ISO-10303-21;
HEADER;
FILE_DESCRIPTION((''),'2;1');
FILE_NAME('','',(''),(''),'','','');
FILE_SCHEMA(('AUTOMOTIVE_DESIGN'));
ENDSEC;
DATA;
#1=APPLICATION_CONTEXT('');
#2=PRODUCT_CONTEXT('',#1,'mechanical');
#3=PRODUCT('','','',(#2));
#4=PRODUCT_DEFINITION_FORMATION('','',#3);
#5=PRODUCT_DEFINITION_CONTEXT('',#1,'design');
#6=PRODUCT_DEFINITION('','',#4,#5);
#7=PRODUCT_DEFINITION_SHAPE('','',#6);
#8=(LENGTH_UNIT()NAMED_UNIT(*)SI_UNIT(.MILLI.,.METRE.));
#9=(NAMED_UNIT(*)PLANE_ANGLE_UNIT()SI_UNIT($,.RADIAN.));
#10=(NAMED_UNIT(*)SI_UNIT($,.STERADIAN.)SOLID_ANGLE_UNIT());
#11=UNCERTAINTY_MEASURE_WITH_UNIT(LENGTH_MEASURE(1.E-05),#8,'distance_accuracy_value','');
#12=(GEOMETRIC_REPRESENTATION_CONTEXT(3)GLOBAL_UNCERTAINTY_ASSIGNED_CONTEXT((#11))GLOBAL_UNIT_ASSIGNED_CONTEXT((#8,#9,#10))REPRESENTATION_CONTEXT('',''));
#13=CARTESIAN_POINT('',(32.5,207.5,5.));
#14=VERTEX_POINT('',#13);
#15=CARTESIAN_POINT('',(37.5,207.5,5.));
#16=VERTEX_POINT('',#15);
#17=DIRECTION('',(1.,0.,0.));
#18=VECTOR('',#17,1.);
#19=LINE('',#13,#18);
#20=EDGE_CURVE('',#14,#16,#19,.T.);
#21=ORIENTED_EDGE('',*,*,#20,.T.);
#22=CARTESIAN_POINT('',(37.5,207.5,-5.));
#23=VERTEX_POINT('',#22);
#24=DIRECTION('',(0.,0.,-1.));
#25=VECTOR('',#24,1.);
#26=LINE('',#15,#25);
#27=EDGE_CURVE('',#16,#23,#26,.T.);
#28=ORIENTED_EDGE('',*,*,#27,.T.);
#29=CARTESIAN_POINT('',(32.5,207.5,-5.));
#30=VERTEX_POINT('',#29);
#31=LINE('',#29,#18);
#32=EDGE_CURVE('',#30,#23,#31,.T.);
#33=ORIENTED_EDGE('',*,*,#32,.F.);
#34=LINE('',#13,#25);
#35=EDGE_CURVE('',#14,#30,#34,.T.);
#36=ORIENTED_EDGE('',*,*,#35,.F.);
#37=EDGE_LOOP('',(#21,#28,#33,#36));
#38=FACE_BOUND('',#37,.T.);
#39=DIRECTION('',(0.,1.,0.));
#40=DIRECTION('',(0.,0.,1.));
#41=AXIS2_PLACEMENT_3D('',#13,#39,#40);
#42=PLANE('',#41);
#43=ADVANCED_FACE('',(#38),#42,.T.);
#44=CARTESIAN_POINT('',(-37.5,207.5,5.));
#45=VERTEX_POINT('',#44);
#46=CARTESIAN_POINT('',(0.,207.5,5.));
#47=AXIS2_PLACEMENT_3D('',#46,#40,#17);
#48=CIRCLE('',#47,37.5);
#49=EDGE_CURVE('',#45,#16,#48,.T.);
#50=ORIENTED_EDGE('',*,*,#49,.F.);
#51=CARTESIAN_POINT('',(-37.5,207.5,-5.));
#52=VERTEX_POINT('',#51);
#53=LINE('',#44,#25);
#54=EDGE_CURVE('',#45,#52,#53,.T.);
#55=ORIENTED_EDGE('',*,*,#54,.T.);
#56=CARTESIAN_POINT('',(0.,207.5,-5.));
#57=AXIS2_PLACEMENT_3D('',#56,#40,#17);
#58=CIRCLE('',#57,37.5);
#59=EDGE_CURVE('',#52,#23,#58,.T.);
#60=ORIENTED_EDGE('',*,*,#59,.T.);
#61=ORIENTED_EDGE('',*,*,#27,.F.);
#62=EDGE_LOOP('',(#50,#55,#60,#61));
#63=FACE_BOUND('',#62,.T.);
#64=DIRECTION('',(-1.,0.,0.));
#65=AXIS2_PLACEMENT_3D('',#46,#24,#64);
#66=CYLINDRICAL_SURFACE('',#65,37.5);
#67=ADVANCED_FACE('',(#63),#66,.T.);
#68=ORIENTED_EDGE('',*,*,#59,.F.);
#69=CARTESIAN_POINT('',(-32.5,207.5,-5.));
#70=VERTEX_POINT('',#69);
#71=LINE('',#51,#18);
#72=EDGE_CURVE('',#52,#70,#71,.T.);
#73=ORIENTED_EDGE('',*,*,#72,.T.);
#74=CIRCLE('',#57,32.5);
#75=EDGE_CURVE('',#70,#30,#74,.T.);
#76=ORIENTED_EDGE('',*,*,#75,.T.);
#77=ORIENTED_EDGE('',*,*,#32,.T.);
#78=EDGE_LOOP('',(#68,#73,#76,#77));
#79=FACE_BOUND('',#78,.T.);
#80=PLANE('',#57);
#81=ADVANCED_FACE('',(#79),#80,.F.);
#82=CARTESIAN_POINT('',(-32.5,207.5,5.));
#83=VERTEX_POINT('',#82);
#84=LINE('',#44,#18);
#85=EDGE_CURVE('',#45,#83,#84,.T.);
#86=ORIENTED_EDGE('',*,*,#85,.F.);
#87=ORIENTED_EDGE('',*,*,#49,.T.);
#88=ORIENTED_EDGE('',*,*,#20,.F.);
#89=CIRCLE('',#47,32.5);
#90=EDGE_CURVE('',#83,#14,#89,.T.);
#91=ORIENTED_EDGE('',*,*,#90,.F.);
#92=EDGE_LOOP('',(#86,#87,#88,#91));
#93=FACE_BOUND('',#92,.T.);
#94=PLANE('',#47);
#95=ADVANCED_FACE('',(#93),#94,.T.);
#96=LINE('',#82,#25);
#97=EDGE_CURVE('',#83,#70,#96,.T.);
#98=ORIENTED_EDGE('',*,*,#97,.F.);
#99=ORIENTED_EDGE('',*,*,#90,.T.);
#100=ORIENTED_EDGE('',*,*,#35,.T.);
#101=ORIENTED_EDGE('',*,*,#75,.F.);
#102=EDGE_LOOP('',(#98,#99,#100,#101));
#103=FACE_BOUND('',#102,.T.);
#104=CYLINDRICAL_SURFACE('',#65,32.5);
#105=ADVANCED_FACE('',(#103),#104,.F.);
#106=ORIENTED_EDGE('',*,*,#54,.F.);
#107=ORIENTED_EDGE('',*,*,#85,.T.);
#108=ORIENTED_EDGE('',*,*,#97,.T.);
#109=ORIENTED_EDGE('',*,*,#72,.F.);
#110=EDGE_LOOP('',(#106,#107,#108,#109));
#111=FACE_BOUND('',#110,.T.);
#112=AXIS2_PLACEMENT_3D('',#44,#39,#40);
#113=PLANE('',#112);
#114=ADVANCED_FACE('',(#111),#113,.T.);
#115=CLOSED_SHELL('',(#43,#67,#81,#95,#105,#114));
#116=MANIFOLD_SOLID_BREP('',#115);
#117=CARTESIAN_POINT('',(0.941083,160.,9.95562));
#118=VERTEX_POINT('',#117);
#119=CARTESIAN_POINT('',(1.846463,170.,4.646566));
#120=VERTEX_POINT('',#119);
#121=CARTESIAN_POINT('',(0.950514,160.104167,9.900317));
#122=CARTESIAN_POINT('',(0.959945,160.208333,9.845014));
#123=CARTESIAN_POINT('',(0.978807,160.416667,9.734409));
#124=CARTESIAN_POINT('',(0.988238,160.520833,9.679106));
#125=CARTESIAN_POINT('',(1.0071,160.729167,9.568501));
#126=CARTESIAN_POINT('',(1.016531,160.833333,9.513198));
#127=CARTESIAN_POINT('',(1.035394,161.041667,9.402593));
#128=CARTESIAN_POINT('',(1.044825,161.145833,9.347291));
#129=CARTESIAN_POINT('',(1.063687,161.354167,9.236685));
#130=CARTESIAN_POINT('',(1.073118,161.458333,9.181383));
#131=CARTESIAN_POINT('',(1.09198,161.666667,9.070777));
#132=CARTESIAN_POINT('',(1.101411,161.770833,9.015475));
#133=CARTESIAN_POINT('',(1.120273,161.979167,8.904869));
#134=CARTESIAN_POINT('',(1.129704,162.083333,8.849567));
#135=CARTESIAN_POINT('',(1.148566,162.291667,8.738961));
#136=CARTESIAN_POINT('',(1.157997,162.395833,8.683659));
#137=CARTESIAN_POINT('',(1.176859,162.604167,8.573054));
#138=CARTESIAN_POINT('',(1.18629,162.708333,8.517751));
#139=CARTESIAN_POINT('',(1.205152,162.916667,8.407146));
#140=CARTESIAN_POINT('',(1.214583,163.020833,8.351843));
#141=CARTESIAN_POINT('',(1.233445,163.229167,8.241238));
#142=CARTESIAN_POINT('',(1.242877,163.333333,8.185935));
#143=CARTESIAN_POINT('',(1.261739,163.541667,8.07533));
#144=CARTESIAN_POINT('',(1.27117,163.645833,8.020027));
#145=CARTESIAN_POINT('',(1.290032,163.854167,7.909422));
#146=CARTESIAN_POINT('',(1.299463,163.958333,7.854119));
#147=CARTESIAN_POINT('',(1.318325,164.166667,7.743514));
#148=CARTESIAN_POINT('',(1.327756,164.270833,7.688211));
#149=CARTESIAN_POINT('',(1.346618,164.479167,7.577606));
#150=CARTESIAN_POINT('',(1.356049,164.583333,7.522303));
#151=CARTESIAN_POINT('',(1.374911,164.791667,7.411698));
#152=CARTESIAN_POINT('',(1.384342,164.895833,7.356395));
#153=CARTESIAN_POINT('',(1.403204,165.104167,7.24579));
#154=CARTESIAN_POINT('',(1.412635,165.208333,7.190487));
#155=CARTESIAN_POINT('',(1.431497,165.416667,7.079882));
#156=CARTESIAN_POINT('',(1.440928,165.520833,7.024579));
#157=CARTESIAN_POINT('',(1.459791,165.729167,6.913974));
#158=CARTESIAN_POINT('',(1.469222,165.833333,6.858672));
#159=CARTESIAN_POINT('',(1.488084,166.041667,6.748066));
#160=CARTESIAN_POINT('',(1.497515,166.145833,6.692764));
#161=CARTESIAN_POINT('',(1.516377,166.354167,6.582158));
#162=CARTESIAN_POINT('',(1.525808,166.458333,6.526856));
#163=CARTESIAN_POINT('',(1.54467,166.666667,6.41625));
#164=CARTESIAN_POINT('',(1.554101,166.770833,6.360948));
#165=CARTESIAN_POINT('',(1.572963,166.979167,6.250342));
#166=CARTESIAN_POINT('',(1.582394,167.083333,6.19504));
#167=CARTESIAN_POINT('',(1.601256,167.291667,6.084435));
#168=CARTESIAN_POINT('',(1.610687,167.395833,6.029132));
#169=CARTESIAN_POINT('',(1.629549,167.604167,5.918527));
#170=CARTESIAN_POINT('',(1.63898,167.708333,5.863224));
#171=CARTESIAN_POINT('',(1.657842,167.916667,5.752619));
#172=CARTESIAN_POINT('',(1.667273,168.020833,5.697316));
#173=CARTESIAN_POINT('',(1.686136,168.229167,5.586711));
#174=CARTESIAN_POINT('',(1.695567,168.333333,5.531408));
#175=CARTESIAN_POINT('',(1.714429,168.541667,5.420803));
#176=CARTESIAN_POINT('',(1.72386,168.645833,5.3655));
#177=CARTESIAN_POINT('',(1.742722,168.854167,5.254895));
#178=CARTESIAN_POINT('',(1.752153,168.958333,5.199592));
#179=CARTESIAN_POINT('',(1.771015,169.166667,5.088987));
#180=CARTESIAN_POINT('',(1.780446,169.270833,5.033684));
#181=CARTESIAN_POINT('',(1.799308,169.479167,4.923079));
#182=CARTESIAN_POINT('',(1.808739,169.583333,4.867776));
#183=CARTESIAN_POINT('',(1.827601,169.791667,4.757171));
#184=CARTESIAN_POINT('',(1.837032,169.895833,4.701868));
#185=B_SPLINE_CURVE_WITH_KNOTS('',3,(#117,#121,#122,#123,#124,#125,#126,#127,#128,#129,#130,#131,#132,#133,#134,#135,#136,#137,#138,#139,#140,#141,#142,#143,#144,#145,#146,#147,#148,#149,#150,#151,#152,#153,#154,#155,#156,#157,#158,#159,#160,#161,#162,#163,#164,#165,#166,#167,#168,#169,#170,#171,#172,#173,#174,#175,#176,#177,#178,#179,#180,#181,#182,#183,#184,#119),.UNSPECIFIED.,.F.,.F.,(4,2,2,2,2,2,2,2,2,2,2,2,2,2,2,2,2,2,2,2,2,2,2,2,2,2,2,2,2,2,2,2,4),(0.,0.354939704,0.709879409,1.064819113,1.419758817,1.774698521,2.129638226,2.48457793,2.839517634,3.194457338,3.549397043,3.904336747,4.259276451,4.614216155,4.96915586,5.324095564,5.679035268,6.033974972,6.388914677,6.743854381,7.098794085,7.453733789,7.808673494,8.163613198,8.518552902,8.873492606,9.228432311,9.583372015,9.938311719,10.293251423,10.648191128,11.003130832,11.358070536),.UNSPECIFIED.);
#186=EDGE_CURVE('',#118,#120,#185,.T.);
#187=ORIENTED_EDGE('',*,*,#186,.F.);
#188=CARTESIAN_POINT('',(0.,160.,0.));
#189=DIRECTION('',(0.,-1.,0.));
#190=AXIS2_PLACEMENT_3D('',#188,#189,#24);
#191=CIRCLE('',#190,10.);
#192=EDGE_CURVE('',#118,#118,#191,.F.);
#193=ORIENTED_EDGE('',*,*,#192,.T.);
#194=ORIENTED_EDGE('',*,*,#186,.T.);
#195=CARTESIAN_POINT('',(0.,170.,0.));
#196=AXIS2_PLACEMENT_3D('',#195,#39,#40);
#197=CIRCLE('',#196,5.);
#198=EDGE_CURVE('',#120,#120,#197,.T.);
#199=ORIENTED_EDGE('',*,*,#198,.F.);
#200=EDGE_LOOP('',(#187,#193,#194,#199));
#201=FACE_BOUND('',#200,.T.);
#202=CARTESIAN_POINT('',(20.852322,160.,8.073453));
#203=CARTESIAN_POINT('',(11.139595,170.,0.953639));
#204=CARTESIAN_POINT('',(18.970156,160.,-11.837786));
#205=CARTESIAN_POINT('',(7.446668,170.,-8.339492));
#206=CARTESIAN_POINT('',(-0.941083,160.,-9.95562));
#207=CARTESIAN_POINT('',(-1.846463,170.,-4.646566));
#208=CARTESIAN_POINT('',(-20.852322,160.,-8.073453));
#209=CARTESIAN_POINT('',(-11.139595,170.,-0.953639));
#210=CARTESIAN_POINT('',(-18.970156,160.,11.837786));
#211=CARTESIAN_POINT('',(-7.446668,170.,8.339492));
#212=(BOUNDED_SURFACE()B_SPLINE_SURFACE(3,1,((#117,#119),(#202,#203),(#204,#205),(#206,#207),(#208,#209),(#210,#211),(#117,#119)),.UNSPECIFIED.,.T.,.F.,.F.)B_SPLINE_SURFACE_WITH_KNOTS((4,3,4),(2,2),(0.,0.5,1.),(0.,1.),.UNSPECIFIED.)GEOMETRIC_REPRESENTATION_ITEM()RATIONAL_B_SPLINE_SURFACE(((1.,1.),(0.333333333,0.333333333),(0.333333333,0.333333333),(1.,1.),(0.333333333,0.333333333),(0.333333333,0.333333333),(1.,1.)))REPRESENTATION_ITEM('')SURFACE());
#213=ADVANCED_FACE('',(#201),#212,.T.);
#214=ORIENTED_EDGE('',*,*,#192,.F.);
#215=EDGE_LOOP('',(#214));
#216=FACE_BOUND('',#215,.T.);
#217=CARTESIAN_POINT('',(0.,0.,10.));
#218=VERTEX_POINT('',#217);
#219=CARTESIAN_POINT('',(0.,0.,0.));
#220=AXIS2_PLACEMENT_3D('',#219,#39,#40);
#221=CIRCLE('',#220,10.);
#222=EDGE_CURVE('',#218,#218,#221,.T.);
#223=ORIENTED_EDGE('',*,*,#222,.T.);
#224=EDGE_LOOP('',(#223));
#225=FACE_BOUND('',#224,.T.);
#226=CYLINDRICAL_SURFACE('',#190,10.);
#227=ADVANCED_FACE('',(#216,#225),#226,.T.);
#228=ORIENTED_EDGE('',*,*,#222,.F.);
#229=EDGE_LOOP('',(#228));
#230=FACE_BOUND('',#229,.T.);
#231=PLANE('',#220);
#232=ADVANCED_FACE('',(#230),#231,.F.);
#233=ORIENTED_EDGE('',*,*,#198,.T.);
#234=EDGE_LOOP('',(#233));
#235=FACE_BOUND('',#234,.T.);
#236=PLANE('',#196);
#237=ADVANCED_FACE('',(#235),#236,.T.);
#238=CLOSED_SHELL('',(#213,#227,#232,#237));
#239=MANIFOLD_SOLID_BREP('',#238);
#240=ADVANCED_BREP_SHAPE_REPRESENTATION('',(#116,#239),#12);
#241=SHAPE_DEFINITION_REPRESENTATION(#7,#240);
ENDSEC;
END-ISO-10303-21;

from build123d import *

# Parameters (mm, degrees)
SKETCH_1_R           = 10
EXTRUDE_1_DEPTH      = 160
EXTRUDE_2_DEPTH      = 5
EXTRUDE_2_DEPTH_BACK = 5


with BuildPart() as part:
    # Эскиз1 → Бобышка-Вытянуть1 (new body)
    with BuildSketch(Plane(origin=(0, 0, 0), x_dir=(1, 0, 0), z_dir=(0, 1, 0))):
        with Locations(Location((0, 0, 0), (0, 0, 270))):
            Circle(SKETCH_1_R)
    extrude(amount=EXTRUDE_1_DEPTH)

    # По сечениям1: read off the stored shape, not the designer's step
    # По сечениям1: loft between two sections, ruled curve by curve
    loft_1_from = [
        Edge.make_bspline([(0.941083133, 160, 9.955619646), (20.852322425, 160, 8.07345338), (18.970156159, 160, -11.837785912), (-0.941083133, 160, -9.955619646), (-20.852322425, 160, -8.07345338), (-18.970156159, 160, 11.837785912), (0.941083133, 160, 9.955619646)], [0, 0, 0, 0, 0.5, 0.5, 0.5, 1, 1, 1, 1], 3, [1, 0.333333333, 0.333333333, 1, 0.333333333, 0.333333333, 1]),
    ]
    loft_1_to = [
        Edge.make_bspline([(1.846463267, 170, 4.646565765), (11.139594796, 170, 0.953639232), (7.446668263, 170, -8.339492298), (-1.846463267, 170, -4.646565765), (-11.139594796, 170, -0.953639232), (-7.446668263, 170, 8.339492298), (1.846463267, 170, 4.646565765)], [0, 0, 0, 0, 0.5, 0.5, 0.5, 1, 1, 1, 1], 3, [1, 0.333333333, 0.333333333, 1, 0.333333333, 0.333333333, 1]),
    ]
    loft_1 = Solid(Shell([*[Face.make_surface_from_curves(loft_1_from[k], loft_1_to[k]) for k in range(1)], Face(Wire(loft_1_from)), Face(Wire(loft_1_to))]))
    add(loft_1)


with BuildPart() as body_2:
    # Эскиз8 → Бобышка-Вытянуть2 (new, two sides: drawn at the far end of the back side and taken through both)
    with BuildSketch(Plane.XY.offset(-EXTRUDE_2_DEPTH_BACK)):
        with BuildLine():
            Line((-37.5, 207.5), (-32.5, 207.5))
            ThreePointArc((-32.5, 207.5), (0, 175), (32.5, 207.5))
            Line((32.5, 207.5), (37.5, 207.5))
            ThreePointArc((37.5, 207.5), (0, 170), (-37.5, 207.5))
        make_face()
    extrude(amount=EXTRUDE_2_DEPTH + EXTRUDE_2_DEPTH_BACK)


solid = Compound([part.part, body_2.part])
